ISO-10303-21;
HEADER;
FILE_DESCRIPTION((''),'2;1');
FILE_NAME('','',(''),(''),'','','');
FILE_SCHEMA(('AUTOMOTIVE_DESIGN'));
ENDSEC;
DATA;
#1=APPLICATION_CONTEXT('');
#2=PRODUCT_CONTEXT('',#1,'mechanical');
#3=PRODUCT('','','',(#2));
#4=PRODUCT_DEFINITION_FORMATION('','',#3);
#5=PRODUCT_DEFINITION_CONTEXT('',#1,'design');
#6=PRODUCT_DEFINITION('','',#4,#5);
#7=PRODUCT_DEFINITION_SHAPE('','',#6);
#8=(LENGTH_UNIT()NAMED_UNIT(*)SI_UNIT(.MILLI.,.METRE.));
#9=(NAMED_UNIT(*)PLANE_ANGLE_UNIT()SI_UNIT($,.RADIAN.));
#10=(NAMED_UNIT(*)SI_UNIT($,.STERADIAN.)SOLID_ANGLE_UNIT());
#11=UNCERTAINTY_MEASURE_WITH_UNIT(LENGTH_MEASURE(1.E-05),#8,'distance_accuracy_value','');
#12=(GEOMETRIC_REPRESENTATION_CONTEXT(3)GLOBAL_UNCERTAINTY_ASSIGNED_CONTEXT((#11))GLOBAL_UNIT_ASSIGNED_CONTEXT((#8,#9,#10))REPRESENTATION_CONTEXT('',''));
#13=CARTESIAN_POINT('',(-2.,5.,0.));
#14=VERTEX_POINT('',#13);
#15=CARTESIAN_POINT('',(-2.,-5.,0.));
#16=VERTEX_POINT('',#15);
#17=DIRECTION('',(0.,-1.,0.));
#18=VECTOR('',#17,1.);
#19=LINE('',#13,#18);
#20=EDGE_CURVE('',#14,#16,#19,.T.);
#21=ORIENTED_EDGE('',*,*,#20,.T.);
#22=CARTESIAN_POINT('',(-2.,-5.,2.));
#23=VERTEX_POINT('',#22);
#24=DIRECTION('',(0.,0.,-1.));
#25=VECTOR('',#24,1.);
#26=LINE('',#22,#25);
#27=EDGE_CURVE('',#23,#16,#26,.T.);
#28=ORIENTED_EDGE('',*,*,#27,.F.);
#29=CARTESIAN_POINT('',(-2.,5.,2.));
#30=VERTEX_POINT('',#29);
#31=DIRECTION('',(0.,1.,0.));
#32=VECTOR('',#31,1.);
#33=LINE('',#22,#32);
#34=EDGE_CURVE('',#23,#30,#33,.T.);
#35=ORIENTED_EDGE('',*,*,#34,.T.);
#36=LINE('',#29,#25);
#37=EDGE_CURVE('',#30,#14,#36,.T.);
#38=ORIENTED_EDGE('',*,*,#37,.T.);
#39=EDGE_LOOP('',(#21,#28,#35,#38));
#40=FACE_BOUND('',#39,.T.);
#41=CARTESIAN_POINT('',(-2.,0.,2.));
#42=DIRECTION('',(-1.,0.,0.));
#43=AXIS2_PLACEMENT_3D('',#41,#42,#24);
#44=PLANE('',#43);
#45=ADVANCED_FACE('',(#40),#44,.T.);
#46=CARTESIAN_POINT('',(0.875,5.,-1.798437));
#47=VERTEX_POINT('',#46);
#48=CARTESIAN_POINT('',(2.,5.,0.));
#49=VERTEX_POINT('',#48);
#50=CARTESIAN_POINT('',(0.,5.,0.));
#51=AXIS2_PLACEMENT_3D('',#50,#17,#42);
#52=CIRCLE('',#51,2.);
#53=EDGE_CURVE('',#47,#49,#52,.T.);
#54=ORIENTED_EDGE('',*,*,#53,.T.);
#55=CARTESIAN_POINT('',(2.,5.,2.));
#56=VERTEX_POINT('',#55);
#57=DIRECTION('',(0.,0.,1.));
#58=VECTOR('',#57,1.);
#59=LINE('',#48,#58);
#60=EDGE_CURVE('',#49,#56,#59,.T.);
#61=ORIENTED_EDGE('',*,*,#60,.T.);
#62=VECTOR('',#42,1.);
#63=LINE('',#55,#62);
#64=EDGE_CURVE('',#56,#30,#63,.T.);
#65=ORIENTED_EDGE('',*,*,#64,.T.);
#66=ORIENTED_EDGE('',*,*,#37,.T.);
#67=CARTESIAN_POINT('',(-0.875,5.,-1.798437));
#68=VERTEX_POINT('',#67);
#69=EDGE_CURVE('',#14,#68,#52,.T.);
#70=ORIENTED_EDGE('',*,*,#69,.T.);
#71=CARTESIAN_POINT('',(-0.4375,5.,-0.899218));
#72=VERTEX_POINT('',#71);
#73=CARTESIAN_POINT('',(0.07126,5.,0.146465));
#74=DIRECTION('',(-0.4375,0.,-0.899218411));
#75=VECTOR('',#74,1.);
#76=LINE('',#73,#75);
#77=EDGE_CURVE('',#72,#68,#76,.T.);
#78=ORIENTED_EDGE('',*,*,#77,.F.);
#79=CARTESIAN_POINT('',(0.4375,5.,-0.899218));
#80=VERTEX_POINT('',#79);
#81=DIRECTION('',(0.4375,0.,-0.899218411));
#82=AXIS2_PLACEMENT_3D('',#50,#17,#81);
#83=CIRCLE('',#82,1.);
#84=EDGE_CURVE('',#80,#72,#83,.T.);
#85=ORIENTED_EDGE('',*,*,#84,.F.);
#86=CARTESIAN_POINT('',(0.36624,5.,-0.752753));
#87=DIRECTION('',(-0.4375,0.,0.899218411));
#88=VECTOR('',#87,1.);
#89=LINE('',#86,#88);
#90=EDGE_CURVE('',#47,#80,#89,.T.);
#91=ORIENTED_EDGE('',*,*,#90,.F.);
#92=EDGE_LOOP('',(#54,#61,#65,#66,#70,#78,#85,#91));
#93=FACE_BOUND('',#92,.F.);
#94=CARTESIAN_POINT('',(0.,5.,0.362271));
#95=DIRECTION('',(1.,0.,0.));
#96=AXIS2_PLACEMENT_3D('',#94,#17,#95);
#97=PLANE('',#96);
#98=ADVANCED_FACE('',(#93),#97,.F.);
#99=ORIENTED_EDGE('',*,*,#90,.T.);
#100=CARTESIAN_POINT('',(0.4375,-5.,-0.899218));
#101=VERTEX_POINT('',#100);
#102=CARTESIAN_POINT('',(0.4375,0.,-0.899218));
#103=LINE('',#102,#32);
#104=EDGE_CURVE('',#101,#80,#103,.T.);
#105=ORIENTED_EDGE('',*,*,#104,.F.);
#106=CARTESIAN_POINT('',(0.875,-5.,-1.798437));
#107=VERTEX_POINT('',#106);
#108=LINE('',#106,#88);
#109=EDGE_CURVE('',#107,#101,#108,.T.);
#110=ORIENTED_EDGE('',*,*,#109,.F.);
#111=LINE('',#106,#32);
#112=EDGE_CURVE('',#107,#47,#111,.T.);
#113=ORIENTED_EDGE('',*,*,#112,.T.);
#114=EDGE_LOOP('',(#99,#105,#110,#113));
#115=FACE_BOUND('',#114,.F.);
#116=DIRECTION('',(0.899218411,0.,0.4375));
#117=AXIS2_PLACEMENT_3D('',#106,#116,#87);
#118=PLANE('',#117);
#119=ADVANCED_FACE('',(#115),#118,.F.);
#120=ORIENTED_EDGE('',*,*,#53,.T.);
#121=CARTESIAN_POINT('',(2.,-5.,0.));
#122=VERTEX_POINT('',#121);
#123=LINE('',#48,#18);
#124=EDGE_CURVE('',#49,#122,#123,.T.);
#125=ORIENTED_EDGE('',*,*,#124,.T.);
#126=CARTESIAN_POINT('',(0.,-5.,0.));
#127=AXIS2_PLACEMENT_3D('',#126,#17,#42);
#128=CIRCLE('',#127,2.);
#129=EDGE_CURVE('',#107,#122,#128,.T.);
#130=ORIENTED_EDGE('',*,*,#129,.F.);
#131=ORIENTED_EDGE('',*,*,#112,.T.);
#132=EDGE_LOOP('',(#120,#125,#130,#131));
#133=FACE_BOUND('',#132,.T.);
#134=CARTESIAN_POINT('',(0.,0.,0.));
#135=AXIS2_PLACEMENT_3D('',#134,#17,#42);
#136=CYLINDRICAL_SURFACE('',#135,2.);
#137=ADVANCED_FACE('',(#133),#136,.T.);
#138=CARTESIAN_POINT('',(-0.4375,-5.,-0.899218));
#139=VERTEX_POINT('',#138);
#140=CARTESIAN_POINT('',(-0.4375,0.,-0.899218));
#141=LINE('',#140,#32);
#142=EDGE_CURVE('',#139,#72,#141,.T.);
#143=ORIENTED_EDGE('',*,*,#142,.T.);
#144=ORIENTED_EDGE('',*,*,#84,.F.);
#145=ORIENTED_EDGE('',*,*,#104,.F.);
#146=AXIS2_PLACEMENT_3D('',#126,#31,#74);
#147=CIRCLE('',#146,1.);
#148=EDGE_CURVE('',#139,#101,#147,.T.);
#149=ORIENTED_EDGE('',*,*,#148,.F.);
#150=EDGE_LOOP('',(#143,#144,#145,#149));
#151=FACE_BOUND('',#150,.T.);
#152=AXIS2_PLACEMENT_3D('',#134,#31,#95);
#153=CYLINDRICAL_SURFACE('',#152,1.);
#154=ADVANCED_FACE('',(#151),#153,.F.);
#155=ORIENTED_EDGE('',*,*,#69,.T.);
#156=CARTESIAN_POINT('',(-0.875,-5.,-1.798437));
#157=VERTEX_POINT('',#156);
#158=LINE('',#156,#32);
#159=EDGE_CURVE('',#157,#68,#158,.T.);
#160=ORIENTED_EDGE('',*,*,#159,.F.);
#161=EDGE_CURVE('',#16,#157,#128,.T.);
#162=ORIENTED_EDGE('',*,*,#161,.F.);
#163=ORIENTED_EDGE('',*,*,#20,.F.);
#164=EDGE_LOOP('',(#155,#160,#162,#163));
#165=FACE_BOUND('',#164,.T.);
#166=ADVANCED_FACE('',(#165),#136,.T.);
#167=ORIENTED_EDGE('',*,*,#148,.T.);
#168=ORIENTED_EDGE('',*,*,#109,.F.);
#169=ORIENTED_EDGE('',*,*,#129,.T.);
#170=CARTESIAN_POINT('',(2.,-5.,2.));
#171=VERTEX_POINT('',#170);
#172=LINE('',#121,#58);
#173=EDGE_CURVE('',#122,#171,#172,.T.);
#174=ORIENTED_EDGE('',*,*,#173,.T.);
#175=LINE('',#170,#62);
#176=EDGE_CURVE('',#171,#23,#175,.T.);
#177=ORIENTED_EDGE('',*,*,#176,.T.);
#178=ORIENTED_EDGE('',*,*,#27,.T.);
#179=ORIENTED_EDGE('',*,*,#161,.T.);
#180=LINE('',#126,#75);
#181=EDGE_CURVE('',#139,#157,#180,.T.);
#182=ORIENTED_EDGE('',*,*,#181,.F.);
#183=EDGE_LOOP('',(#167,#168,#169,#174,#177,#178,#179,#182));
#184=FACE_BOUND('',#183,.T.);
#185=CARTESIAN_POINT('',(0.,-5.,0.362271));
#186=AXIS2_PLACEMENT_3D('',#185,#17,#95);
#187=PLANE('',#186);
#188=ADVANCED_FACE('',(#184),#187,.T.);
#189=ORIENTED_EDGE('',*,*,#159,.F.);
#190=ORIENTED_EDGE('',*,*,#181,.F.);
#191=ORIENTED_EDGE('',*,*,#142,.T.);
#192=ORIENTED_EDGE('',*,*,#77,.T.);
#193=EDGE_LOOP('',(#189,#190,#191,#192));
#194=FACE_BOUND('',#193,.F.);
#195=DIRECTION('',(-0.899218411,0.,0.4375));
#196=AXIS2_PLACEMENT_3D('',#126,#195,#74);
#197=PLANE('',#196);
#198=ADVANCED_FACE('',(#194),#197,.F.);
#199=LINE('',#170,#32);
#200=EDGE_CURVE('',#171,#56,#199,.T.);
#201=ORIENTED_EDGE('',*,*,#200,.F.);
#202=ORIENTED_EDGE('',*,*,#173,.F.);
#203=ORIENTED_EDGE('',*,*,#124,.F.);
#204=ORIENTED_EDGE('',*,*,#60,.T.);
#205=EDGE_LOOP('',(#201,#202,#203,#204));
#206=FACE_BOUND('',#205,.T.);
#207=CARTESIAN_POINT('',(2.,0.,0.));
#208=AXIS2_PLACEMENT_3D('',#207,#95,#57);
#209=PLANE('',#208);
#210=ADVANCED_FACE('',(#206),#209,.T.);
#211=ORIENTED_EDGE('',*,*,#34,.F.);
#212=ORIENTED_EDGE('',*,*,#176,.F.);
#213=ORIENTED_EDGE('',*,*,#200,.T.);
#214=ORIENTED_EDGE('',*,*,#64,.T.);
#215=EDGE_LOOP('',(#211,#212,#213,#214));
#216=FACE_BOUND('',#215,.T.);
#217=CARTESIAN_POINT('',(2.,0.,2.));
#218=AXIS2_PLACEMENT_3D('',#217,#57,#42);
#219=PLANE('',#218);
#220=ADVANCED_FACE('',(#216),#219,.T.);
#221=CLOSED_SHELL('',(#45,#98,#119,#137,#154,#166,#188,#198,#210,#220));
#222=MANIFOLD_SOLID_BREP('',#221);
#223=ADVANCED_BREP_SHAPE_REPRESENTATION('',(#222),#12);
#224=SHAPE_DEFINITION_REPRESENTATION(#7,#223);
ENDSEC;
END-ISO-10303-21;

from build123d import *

# Parameters (mm, degrees)
F0_R     = 1
F1_DEPTH = 5
F3_DEPTH = 10.001


# Not quite as in the source:
# - a feature of the source that left no trace in its solid (it failed there, or was rolled back) is left out


with BuildPart() as f1:
    # F0 (on Front) → F1 (new body, symmetric)
    with BuildSketch(Plane.XZ):
        with BuildLine():
            Line((-2, 2), (-2, 0))
            ThreePointArc((-2, 0), (0, -2), (2, 0))
            Line((2, 0), (2, 2))
            Line((2, 2), (0, 2))
            Line((0, 2), (-2, 2))
        make_face()
        Circle(F0_R, mode=Mode.SUBTRACT)
    extrude(amount=F1_DEPTH, both=True)

    # F2 (on face) → F3 (cut, through all)
    with BuildSketch(Plane.XZ.offset(5)):
        with BuildLine():
            Line((0.875, -1.7984368212), (0, 0))
            Line((0, 0), (-0.875, -1.7984368212))
            ThreePointArc((-0.875, -1.7984368212), (0, -2), (0.875, -1.7984368212))
        make_face()
    extrude(amount=-F3_DEPTH, mode=Mode.SUBTRACT)


solid = f1.part
